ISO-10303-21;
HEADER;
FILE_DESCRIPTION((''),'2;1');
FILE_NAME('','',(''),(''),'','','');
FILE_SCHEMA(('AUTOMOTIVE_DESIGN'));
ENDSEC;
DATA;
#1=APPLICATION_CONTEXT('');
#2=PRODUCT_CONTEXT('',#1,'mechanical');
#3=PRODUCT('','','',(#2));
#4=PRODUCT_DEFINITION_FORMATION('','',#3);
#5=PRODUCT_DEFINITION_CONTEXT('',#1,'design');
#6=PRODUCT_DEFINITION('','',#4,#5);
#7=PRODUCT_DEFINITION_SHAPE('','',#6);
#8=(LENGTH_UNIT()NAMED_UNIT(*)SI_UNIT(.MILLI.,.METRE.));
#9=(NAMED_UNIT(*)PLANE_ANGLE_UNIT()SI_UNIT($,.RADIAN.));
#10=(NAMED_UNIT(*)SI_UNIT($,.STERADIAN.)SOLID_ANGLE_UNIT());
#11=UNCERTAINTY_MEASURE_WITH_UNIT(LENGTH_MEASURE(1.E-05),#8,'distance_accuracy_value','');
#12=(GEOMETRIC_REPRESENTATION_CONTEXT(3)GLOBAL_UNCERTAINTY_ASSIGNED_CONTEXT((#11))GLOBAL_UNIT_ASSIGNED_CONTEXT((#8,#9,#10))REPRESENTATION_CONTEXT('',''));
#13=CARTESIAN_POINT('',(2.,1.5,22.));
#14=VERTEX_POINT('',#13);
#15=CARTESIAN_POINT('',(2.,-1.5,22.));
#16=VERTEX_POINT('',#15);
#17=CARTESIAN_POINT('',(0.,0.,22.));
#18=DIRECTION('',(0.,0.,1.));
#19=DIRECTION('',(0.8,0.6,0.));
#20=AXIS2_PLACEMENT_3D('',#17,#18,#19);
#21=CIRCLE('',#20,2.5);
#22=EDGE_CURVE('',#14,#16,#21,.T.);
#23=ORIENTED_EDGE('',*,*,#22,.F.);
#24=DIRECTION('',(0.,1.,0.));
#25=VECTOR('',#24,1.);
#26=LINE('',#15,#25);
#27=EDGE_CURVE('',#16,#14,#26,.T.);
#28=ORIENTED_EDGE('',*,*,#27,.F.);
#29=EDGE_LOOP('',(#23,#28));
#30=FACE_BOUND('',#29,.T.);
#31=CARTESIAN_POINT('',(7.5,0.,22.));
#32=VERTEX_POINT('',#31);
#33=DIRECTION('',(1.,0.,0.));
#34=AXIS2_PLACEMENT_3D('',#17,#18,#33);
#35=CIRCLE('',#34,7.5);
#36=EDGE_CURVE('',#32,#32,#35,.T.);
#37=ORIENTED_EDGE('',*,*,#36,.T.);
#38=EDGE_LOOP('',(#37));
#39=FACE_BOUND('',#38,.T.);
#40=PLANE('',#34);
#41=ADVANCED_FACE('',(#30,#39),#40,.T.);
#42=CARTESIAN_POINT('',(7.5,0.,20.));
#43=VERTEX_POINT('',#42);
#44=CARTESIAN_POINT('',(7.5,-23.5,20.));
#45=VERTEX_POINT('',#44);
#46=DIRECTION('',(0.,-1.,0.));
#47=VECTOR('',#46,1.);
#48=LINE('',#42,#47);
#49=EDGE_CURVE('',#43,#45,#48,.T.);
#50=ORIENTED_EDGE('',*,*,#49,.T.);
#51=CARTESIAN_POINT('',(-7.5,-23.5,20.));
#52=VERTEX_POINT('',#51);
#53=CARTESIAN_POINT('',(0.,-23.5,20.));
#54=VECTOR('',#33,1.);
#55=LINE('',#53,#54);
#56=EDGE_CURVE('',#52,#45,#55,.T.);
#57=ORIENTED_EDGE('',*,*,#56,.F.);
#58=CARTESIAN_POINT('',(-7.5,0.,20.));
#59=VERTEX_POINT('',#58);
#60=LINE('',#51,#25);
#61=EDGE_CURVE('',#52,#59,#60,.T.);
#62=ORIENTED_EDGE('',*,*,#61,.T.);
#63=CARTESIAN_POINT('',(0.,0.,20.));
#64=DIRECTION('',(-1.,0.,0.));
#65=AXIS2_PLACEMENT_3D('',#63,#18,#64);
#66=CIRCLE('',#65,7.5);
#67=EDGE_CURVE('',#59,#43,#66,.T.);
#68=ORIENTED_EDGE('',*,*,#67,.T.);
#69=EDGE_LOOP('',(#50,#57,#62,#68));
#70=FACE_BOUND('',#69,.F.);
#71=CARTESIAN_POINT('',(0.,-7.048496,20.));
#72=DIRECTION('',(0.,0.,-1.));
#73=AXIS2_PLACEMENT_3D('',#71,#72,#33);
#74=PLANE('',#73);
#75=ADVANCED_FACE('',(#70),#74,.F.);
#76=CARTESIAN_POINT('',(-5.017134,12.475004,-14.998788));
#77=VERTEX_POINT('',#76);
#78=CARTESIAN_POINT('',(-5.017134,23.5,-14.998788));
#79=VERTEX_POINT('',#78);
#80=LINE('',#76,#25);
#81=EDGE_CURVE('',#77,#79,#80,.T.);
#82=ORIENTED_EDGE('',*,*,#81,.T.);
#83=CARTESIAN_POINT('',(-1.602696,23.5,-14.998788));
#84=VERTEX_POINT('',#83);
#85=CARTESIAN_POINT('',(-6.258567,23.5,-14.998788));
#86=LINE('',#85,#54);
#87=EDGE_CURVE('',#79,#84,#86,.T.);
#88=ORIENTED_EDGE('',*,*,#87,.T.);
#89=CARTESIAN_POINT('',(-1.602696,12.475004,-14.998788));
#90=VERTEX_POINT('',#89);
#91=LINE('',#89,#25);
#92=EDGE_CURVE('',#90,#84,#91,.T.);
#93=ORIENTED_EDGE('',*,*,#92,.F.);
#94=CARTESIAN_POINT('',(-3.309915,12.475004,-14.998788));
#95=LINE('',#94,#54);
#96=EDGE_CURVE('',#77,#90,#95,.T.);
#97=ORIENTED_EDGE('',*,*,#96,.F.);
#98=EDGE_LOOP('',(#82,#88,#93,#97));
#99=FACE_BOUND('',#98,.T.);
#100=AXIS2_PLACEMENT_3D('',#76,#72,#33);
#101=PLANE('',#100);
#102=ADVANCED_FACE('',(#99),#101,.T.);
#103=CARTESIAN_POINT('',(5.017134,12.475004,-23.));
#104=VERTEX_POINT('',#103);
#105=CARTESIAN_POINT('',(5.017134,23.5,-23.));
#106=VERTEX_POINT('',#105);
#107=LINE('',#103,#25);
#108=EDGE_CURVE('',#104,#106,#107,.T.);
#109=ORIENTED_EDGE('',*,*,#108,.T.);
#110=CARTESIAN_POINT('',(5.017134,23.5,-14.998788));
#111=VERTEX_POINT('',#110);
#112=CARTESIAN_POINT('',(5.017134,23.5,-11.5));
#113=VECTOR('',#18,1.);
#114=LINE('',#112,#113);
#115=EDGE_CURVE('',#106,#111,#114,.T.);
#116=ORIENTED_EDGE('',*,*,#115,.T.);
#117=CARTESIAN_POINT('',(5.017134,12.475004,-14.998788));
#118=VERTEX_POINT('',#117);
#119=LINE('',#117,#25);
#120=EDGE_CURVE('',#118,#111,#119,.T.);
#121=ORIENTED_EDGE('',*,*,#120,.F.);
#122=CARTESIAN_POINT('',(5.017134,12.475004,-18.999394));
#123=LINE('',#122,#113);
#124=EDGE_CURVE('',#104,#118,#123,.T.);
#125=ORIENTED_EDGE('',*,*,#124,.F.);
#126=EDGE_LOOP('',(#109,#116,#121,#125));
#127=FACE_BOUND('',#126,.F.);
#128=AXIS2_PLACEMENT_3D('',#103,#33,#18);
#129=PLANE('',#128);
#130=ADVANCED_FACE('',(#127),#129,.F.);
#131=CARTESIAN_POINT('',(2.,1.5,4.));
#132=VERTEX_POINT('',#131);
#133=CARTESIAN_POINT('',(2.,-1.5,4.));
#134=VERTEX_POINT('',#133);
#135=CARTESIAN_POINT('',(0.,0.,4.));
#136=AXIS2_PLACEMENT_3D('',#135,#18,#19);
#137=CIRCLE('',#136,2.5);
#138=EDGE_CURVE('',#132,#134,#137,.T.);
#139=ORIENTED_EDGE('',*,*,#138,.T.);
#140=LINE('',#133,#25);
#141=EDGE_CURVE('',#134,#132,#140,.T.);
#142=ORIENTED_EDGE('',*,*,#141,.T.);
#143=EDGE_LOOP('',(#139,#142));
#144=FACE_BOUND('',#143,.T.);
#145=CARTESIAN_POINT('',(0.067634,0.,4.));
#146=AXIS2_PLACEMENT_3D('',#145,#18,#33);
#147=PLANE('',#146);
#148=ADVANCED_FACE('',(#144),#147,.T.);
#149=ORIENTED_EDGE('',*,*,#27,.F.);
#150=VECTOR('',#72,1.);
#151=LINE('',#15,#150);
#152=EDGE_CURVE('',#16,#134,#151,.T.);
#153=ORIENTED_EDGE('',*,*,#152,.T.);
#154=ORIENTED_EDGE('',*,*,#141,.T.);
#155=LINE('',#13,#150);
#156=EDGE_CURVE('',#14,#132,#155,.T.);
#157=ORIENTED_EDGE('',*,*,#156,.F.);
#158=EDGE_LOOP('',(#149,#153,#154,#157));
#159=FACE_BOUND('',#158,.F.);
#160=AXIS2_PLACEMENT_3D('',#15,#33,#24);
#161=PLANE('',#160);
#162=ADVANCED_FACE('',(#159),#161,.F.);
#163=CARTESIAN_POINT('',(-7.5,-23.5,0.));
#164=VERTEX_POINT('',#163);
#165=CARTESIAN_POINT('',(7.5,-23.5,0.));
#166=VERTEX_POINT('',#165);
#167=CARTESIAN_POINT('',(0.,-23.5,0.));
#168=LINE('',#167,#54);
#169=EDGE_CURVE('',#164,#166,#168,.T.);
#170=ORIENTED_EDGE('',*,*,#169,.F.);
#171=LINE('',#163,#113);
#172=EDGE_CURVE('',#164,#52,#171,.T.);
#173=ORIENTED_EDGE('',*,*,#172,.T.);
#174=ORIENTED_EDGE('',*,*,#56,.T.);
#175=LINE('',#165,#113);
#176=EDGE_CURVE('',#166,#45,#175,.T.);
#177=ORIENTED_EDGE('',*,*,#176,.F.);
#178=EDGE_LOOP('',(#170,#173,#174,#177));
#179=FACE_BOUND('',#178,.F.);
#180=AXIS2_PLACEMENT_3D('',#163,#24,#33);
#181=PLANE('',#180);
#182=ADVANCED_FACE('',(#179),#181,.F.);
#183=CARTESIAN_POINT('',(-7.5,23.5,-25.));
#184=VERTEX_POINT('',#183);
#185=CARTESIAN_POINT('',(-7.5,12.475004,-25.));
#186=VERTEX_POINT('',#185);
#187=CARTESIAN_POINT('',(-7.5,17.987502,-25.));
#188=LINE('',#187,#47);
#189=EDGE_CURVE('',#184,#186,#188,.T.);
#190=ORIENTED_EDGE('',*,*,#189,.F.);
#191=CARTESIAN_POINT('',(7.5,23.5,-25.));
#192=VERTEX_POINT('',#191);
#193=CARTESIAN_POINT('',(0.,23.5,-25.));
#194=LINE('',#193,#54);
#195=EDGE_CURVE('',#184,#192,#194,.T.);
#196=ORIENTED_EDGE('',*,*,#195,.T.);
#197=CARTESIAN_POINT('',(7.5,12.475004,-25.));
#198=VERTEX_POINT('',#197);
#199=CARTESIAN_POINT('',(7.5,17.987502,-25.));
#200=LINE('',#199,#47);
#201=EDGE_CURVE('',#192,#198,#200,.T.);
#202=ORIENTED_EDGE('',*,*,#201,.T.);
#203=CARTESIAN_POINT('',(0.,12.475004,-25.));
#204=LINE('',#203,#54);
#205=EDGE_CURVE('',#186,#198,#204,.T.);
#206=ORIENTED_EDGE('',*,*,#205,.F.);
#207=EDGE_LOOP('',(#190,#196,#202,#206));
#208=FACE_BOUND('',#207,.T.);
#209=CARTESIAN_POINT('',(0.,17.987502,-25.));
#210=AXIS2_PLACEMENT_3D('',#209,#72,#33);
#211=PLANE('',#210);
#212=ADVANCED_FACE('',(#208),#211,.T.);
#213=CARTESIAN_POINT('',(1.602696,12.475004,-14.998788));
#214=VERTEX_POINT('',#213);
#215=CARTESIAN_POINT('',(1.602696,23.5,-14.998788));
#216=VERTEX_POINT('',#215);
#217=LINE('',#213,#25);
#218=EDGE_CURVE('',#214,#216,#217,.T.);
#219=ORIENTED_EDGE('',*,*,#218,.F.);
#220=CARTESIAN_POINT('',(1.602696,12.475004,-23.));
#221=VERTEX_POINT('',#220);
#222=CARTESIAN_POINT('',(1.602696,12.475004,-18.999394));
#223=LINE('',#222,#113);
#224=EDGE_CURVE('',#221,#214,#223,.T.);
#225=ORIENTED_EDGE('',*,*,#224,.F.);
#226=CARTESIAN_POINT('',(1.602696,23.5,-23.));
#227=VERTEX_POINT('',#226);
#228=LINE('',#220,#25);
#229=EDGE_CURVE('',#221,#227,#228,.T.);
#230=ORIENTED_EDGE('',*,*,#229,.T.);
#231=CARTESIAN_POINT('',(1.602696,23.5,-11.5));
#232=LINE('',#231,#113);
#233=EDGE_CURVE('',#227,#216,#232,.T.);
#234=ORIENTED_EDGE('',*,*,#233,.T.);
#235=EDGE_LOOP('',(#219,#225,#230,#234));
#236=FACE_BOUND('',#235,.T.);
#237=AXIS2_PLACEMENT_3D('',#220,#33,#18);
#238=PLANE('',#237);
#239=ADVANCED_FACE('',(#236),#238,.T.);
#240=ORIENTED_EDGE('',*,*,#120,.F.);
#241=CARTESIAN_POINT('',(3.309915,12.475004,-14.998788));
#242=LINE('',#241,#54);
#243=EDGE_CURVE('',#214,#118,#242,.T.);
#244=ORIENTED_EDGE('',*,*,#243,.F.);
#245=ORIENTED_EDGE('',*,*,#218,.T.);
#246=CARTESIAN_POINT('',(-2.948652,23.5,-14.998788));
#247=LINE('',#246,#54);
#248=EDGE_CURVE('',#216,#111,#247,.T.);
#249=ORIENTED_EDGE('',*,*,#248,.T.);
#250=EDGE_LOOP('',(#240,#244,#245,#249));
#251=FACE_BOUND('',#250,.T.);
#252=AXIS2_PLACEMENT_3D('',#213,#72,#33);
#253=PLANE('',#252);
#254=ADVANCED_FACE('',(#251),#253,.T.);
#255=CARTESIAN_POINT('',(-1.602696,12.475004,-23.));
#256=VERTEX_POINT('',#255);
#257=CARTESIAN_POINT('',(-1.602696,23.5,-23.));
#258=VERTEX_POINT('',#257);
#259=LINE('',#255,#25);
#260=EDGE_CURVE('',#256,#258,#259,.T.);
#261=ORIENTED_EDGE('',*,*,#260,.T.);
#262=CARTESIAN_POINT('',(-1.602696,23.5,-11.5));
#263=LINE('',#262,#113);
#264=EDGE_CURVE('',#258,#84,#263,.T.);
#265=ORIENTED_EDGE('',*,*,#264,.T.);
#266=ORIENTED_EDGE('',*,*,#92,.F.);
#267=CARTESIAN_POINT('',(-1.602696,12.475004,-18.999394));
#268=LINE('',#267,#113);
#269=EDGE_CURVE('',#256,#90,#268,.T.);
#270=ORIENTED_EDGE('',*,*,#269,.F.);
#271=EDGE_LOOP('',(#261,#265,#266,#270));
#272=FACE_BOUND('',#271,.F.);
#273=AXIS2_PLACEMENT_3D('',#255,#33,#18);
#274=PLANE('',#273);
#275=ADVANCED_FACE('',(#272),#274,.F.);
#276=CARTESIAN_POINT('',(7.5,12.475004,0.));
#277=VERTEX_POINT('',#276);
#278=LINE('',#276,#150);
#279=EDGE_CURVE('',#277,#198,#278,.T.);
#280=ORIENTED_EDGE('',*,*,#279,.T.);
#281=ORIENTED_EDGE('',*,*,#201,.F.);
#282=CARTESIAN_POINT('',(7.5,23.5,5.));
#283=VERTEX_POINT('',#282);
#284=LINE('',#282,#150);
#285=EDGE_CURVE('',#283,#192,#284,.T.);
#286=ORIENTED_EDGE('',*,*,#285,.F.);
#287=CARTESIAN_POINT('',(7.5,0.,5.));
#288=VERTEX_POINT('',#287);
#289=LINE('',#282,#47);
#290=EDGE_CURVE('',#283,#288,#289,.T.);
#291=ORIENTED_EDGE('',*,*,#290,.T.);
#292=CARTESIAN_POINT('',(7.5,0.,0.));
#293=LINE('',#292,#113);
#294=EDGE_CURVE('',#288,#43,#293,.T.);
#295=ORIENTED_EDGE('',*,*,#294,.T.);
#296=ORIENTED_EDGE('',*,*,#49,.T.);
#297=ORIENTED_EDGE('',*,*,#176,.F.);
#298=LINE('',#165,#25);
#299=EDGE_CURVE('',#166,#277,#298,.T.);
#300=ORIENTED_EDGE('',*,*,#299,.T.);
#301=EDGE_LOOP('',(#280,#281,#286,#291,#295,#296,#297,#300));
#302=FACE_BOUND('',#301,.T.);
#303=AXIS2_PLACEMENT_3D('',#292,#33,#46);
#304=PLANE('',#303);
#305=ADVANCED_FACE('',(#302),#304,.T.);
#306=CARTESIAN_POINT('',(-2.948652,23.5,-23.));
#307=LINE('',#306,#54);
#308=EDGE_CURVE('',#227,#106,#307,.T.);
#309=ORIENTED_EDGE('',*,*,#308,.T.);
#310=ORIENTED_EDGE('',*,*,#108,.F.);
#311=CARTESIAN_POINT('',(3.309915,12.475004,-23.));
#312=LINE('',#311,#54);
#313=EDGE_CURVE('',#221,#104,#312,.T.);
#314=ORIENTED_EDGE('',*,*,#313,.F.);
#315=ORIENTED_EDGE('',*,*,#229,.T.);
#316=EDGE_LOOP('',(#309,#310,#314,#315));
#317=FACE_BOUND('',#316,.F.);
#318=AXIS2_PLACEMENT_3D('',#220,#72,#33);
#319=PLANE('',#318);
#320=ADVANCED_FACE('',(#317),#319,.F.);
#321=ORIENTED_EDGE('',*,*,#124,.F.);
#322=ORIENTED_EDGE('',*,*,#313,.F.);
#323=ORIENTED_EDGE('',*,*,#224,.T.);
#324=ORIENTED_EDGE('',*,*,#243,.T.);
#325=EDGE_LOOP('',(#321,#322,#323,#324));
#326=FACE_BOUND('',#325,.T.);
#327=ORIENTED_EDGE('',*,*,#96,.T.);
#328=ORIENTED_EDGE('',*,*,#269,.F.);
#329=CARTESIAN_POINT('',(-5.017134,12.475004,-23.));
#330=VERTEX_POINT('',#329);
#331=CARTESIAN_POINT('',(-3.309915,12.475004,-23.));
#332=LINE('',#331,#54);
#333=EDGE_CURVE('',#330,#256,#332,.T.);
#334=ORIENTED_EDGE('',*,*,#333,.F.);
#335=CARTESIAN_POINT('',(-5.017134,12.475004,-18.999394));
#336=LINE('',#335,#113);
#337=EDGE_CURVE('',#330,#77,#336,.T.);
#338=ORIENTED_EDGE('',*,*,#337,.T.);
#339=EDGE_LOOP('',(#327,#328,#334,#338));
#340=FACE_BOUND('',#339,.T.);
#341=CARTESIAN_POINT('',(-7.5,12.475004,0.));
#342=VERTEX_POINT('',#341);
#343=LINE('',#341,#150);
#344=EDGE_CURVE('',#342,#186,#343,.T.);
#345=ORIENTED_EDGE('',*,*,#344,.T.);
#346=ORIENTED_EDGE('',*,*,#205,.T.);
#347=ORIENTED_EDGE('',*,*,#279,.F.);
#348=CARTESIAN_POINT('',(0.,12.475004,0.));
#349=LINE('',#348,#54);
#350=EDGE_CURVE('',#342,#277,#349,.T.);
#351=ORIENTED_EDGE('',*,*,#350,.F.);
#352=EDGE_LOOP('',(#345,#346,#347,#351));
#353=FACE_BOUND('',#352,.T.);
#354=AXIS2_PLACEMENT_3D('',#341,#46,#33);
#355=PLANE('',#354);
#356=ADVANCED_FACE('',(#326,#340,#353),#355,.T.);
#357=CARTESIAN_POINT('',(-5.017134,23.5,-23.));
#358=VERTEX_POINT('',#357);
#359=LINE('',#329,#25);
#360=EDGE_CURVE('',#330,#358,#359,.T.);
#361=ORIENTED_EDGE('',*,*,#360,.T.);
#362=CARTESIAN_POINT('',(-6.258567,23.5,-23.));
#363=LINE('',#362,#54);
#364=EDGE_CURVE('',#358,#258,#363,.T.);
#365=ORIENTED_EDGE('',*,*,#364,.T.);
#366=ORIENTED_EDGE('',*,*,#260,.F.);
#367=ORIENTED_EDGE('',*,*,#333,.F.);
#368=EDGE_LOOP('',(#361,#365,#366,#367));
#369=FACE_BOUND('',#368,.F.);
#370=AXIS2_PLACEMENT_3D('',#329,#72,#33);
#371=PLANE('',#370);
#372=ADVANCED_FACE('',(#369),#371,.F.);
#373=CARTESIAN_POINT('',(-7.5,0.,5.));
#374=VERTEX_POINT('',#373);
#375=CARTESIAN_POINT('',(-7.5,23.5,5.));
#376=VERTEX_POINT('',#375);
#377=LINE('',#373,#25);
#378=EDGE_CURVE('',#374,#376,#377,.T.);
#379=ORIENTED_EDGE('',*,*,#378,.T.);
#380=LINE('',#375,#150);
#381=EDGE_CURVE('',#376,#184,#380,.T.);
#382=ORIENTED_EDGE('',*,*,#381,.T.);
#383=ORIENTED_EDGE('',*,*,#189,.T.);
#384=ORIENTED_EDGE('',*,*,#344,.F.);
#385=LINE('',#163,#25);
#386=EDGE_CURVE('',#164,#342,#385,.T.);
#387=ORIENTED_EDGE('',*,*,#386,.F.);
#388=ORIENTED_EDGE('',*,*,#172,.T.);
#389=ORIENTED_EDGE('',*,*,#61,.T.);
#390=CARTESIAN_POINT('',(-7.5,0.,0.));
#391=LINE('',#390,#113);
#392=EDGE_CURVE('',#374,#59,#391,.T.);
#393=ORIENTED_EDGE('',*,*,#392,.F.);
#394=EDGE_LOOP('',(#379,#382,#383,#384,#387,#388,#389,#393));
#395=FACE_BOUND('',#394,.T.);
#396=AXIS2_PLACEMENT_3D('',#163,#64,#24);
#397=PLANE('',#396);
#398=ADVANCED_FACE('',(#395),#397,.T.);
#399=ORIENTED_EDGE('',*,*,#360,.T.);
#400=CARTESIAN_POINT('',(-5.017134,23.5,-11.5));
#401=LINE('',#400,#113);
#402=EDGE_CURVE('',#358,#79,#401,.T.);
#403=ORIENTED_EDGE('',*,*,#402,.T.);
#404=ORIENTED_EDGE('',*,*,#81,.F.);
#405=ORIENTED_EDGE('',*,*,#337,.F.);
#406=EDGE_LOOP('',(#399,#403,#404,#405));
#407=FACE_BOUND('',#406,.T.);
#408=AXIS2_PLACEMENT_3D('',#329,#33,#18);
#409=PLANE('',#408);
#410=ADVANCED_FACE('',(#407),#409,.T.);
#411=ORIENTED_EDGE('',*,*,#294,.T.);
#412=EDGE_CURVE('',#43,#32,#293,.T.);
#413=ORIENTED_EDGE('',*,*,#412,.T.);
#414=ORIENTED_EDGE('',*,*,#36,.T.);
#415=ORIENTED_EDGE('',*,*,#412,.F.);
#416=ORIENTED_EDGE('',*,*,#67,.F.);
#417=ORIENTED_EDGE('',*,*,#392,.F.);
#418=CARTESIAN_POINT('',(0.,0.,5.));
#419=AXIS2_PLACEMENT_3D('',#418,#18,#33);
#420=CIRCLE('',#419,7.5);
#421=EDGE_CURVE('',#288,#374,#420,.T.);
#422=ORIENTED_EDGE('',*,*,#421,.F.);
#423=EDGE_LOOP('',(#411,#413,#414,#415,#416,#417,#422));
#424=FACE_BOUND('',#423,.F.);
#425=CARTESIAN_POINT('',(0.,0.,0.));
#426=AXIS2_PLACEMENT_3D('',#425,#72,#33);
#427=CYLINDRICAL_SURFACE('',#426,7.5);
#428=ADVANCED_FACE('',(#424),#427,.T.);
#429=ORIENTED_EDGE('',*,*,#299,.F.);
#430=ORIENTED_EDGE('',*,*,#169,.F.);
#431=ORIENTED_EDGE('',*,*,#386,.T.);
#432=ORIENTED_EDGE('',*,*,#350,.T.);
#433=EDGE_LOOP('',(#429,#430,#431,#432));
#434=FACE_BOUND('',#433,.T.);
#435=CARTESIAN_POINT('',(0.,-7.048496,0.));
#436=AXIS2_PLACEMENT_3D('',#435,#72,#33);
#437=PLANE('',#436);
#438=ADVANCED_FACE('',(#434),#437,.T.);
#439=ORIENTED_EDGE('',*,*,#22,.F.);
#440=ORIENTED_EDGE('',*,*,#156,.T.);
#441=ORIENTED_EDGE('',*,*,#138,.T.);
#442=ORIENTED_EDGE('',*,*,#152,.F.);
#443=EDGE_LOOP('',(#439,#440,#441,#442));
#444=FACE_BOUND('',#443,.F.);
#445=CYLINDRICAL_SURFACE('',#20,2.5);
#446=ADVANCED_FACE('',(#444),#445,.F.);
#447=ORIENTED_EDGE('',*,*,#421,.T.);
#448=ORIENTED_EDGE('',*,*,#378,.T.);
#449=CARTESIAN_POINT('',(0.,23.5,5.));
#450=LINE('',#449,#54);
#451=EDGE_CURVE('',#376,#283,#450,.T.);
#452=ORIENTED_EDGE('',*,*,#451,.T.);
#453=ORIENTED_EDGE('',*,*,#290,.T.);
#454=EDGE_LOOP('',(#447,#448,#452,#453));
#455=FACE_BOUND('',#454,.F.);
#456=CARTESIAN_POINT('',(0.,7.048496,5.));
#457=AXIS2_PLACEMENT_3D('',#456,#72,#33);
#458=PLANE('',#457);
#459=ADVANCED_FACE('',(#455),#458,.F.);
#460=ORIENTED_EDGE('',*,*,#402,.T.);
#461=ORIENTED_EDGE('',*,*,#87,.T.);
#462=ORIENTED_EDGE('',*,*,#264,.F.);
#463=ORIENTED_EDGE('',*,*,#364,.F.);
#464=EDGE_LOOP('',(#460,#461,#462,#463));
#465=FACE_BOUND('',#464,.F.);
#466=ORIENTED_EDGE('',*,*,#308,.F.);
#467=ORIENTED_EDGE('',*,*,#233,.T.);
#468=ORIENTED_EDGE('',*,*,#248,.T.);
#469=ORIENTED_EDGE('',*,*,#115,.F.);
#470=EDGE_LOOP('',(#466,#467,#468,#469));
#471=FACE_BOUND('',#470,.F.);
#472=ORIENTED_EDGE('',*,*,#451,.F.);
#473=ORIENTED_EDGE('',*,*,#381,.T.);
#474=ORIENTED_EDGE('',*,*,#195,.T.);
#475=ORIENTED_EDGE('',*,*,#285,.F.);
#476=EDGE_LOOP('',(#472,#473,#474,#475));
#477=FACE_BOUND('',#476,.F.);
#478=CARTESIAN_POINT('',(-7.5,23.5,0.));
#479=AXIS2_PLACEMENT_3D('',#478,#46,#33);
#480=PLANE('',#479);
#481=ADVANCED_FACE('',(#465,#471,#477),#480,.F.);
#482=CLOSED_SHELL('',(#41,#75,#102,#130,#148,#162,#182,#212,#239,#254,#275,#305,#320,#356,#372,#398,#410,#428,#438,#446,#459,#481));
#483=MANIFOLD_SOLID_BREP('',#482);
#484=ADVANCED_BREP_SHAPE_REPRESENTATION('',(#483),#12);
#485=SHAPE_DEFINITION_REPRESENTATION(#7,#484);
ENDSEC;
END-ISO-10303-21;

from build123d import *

# Parameters (mm, degrees)
F0_R     = 7.5
F1_DEPTH = 22
F3_DEPTH = 18
F4_W     = 15
F4_H     = 11.0249955803
F5_DEPTH = 5
F6_DEPTH = 25
F7_DEPTH = 20
F8_W     = 3.414438339
F8_H     = 8.0012119859
F9_DEPTH = 11.0259955803


with BuildPart() as f1:
    # F0 (on Top) → F1 (new body)
    with BuildSketch(Plane.XY):
        Circle(F0_R)
    extrude(amount=F1_DEPTH)

    # F2 (on face) → F3 (cut)
    with BuildSketch(Plane.XY.offset(22)):
        with BuildLine():
            Line((2, -1.5), (2, 1.5))
            ThreePointArc((2, 1.5), (-2.5, 0), (2, -1.5))
        make_face()
    extrude(amount=-F3_DEPTH, mode=Mode.SUBTRACT)

    # F4 (on face) → F5 (join)
    with BuildSketch(Plane(origin=(0, 0, 0), x_dir=(1, 0, 0), z_dir=(0, 0, -1))):
        with BuildLine():
            ThreePointArc((7.5, 0), (0, -7.5), (-7.5, 0))
            Line((-7.5, 0), (-7.5, -12.4750044197))
            Line((-7.5, -12.4750044197), (7.5, -12.4750044197))
            Line((7.5, -12.4750044197), (7.5, 0))
        make_face()
        with Locations((0, -17.9875022098)):
            Rectangle(F4_W, F4_H)
    extrude(amount=-F5_DEPTH)

    # F4 (on face) → F6 (join)
    with BuildSketch(Plane(origin=(0, 0, 0), x_dir=(1, 0, 0), z_dir=(0, 0, -1))):
        with Locations((0, -17.9875022098)):
            Rectangle(F4_W, F4_H)
    extrude(amount=F6_DEPTH)

    # F4 (on face) → F7 (join)
    with BuildSketch(Plane(origin=(0, 0, 0), x_dir=(1, 0, 0), z_dir=(0, 0, -1))):
        with BuildLine():
            Line((-7.5, 12.4750044197), (-7.5, 0))
            ThreePointArc((-7.5, 0), (0, 7.5), (7.5, 0))
            Line((7.5, 0), (7.5, 12.4750044197))
            Line((7.5, 12.4750044197), (-7.5, 12.4750044197))
        make_face()
        with Locations((0, 17.9875022098)):
            Rectangle(F4_W, F4_H)
    extrude(amount=-F7_DEPTH)

    # F8 (on face) → F9 (cut, through all)
    with BuildSketch(Plane.XZ.offset(-12.4750044197)):
        with Locations((3.3099151915, -18.999394007)):
            Rectangle(F8_W, F8_H)
        with Locations((-3.3099151915, -18.999394007)):
            Rectangle(F8_W, F8_H)
    extrude(amount=-F9_DEPTH, mode=Mode.SUBTRACT)


solid = f1.part
